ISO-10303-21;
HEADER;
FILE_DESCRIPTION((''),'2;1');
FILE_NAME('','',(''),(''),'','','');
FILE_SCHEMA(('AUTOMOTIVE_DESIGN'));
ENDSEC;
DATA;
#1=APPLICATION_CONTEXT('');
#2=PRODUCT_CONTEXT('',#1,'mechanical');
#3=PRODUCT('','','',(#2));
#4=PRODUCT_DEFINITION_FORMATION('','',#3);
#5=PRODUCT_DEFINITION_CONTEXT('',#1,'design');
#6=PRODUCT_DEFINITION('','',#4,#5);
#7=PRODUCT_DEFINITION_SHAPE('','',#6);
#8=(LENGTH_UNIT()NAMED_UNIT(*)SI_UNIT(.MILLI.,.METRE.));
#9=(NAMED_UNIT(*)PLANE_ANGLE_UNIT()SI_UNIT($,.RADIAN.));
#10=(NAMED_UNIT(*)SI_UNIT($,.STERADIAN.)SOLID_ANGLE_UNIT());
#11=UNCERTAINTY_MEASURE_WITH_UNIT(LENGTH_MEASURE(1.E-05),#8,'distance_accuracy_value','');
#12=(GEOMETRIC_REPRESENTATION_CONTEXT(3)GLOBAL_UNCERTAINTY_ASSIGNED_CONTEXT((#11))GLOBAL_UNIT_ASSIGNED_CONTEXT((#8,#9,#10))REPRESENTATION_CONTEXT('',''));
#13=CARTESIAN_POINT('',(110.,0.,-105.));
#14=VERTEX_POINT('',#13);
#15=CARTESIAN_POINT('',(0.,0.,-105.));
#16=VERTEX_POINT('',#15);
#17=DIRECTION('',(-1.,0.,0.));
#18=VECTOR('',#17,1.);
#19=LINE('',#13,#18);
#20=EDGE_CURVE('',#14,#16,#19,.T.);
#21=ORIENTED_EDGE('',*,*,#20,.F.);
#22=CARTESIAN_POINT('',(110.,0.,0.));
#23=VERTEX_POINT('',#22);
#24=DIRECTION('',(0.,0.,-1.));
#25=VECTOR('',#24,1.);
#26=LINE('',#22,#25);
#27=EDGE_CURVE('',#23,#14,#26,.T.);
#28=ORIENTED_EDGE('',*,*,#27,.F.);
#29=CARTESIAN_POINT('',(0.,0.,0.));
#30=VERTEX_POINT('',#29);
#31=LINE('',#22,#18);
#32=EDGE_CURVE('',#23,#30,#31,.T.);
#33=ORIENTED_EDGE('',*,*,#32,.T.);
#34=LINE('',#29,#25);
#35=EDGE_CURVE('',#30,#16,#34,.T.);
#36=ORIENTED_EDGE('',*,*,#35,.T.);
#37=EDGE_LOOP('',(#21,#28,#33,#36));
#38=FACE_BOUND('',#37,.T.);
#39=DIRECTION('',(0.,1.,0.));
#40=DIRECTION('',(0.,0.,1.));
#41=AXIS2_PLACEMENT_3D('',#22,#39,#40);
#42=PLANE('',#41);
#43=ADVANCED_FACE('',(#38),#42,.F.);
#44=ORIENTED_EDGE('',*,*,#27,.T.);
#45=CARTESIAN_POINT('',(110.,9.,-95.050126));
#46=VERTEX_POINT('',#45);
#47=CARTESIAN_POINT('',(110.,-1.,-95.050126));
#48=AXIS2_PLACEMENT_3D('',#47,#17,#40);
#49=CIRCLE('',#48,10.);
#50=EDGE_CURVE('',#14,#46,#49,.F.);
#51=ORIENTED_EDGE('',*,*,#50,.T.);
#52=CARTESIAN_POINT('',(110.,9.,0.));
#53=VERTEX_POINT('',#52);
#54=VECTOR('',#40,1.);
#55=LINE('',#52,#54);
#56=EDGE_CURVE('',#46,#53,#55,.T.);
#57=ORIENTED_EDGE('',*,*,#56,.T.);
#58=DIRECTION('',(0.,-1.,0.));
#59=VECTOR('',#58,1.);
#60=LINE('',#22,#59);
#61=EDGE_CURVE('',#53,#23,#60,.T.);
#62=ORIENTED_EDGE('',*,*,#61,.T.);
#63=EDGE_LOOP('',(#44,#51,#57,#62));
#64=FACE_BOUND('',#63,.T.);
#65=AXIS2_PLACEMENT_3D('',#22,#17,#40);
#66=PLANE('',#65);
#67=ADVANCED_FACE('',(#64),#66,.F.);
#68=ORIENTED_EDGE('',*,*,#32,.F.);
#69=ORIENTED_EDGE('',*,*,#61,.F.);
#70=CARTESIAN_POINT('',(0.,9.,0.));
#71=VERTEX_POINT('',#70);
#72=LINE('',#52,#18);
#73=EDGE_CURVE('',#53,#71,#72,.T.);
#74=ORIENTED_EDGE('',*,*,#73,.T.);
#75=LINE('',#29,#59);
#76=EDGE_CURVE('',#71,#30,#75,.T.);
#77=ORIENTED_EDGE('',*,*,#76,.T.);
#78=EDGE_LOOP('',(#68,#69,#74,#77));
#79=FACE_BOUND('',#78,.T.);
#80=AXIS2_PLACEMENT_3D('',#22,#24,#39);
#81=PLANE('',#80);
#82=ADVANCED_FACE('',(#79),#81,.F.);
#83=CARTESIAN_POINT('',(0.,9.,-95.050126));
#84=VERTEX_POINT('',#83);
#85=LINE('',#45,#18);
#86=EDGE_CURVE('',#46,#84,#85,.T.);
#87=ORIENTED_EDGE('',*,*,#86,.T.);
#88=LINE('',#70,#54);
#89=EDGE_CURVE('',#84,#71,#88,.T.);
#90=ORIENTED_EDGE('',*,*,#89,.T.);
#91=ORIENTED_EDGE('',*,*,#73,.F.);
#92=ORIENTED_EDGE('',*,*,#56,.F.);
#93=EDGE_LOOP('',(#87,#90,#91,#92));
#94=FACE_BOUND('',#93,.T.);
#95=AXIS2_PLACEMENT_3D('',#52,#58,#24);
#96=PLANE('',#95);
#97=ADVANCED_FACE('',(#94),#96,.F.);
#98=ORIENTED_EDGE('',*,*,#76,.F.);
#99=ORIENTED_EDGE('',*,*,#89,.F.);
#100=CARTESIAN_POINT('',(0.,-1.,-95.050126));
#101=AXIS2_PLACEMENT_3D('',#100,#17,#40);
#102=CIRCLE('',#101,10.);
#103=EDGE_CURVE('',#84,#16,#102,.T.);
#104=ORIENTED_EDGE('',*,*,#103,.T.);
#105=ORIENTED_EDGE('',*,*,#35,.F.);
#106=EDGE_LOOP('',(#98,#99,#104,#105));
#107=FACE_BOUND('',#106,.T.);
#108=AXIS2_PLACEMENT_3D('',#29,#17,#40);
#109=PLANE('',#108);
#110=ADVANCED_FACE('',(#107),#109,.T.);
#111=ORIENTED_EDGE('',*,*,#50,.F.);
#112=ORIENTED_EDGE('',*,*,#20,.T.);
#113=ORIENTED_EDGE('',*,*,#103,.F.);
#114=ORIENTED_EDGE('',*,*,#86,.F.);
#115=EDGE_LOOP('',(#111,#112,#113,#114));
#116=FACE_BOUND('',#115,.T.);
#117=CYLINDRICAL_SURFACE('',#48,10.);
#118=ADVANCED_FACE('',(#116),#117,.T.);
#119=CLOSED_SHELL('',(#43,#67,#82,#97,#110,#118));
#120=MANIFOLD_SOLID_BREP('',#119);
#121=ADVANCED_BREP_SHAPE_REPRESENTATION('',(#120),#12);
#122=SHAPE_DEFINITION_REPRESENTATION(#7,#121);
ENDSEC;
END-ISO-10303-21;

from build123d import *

# Parameters (mm, degrees)
ESQUISSE1_W        = 105
ESQUISSE1_H        = 9
BOSS_EXTRU_1_DEPTH = 110
CONG_1_R           = 10


with BuildPart() as part:
    # Esquisse1 → Boss.-Extru.1 (new body)
    with BuildSketch(Plane(origin=(0, 0, 0), x_dir=(0, 0, -1), z_dir=(1, 0, 0))):
        with Locations((52.5, 4.5)):
            Rectangle(ESQUISSE1_W, ESQUISSE1_H)
    extrude(amount=BOSS_EXTRU_1_DEPTH)

    # Congé1
    # the kernel refuses this fillet: 10 mm, written as the material it takes off along each edge
    with BuildSketch(Plane(origin=(-24.874685928, 9, -105), x_dir=(0, -1, 0), z_dir=(1, 0, 0))) as cong_1_piece_1:
        with BuildLine():
            CenterArc((10, -9.949874371), CONG_1_R, 95.739170477, 84.260829523)
            Line((0, -9.949874371), (-0.2, -9.949874371))
            Line((-0.2, -9.949874371), (-0.2, 0))
            Line((-0.2, 0), (0, 0.2))
            ThreePointArc((0, 0.2), (4.5, 0.2), (8.98, 0.198997487))
            Line((8.98, 0.198997487), (9, 0))
        make_face()
    extrude(amount=159.749371855, mode=Mode.SUBTRACT)


solid = part.part
